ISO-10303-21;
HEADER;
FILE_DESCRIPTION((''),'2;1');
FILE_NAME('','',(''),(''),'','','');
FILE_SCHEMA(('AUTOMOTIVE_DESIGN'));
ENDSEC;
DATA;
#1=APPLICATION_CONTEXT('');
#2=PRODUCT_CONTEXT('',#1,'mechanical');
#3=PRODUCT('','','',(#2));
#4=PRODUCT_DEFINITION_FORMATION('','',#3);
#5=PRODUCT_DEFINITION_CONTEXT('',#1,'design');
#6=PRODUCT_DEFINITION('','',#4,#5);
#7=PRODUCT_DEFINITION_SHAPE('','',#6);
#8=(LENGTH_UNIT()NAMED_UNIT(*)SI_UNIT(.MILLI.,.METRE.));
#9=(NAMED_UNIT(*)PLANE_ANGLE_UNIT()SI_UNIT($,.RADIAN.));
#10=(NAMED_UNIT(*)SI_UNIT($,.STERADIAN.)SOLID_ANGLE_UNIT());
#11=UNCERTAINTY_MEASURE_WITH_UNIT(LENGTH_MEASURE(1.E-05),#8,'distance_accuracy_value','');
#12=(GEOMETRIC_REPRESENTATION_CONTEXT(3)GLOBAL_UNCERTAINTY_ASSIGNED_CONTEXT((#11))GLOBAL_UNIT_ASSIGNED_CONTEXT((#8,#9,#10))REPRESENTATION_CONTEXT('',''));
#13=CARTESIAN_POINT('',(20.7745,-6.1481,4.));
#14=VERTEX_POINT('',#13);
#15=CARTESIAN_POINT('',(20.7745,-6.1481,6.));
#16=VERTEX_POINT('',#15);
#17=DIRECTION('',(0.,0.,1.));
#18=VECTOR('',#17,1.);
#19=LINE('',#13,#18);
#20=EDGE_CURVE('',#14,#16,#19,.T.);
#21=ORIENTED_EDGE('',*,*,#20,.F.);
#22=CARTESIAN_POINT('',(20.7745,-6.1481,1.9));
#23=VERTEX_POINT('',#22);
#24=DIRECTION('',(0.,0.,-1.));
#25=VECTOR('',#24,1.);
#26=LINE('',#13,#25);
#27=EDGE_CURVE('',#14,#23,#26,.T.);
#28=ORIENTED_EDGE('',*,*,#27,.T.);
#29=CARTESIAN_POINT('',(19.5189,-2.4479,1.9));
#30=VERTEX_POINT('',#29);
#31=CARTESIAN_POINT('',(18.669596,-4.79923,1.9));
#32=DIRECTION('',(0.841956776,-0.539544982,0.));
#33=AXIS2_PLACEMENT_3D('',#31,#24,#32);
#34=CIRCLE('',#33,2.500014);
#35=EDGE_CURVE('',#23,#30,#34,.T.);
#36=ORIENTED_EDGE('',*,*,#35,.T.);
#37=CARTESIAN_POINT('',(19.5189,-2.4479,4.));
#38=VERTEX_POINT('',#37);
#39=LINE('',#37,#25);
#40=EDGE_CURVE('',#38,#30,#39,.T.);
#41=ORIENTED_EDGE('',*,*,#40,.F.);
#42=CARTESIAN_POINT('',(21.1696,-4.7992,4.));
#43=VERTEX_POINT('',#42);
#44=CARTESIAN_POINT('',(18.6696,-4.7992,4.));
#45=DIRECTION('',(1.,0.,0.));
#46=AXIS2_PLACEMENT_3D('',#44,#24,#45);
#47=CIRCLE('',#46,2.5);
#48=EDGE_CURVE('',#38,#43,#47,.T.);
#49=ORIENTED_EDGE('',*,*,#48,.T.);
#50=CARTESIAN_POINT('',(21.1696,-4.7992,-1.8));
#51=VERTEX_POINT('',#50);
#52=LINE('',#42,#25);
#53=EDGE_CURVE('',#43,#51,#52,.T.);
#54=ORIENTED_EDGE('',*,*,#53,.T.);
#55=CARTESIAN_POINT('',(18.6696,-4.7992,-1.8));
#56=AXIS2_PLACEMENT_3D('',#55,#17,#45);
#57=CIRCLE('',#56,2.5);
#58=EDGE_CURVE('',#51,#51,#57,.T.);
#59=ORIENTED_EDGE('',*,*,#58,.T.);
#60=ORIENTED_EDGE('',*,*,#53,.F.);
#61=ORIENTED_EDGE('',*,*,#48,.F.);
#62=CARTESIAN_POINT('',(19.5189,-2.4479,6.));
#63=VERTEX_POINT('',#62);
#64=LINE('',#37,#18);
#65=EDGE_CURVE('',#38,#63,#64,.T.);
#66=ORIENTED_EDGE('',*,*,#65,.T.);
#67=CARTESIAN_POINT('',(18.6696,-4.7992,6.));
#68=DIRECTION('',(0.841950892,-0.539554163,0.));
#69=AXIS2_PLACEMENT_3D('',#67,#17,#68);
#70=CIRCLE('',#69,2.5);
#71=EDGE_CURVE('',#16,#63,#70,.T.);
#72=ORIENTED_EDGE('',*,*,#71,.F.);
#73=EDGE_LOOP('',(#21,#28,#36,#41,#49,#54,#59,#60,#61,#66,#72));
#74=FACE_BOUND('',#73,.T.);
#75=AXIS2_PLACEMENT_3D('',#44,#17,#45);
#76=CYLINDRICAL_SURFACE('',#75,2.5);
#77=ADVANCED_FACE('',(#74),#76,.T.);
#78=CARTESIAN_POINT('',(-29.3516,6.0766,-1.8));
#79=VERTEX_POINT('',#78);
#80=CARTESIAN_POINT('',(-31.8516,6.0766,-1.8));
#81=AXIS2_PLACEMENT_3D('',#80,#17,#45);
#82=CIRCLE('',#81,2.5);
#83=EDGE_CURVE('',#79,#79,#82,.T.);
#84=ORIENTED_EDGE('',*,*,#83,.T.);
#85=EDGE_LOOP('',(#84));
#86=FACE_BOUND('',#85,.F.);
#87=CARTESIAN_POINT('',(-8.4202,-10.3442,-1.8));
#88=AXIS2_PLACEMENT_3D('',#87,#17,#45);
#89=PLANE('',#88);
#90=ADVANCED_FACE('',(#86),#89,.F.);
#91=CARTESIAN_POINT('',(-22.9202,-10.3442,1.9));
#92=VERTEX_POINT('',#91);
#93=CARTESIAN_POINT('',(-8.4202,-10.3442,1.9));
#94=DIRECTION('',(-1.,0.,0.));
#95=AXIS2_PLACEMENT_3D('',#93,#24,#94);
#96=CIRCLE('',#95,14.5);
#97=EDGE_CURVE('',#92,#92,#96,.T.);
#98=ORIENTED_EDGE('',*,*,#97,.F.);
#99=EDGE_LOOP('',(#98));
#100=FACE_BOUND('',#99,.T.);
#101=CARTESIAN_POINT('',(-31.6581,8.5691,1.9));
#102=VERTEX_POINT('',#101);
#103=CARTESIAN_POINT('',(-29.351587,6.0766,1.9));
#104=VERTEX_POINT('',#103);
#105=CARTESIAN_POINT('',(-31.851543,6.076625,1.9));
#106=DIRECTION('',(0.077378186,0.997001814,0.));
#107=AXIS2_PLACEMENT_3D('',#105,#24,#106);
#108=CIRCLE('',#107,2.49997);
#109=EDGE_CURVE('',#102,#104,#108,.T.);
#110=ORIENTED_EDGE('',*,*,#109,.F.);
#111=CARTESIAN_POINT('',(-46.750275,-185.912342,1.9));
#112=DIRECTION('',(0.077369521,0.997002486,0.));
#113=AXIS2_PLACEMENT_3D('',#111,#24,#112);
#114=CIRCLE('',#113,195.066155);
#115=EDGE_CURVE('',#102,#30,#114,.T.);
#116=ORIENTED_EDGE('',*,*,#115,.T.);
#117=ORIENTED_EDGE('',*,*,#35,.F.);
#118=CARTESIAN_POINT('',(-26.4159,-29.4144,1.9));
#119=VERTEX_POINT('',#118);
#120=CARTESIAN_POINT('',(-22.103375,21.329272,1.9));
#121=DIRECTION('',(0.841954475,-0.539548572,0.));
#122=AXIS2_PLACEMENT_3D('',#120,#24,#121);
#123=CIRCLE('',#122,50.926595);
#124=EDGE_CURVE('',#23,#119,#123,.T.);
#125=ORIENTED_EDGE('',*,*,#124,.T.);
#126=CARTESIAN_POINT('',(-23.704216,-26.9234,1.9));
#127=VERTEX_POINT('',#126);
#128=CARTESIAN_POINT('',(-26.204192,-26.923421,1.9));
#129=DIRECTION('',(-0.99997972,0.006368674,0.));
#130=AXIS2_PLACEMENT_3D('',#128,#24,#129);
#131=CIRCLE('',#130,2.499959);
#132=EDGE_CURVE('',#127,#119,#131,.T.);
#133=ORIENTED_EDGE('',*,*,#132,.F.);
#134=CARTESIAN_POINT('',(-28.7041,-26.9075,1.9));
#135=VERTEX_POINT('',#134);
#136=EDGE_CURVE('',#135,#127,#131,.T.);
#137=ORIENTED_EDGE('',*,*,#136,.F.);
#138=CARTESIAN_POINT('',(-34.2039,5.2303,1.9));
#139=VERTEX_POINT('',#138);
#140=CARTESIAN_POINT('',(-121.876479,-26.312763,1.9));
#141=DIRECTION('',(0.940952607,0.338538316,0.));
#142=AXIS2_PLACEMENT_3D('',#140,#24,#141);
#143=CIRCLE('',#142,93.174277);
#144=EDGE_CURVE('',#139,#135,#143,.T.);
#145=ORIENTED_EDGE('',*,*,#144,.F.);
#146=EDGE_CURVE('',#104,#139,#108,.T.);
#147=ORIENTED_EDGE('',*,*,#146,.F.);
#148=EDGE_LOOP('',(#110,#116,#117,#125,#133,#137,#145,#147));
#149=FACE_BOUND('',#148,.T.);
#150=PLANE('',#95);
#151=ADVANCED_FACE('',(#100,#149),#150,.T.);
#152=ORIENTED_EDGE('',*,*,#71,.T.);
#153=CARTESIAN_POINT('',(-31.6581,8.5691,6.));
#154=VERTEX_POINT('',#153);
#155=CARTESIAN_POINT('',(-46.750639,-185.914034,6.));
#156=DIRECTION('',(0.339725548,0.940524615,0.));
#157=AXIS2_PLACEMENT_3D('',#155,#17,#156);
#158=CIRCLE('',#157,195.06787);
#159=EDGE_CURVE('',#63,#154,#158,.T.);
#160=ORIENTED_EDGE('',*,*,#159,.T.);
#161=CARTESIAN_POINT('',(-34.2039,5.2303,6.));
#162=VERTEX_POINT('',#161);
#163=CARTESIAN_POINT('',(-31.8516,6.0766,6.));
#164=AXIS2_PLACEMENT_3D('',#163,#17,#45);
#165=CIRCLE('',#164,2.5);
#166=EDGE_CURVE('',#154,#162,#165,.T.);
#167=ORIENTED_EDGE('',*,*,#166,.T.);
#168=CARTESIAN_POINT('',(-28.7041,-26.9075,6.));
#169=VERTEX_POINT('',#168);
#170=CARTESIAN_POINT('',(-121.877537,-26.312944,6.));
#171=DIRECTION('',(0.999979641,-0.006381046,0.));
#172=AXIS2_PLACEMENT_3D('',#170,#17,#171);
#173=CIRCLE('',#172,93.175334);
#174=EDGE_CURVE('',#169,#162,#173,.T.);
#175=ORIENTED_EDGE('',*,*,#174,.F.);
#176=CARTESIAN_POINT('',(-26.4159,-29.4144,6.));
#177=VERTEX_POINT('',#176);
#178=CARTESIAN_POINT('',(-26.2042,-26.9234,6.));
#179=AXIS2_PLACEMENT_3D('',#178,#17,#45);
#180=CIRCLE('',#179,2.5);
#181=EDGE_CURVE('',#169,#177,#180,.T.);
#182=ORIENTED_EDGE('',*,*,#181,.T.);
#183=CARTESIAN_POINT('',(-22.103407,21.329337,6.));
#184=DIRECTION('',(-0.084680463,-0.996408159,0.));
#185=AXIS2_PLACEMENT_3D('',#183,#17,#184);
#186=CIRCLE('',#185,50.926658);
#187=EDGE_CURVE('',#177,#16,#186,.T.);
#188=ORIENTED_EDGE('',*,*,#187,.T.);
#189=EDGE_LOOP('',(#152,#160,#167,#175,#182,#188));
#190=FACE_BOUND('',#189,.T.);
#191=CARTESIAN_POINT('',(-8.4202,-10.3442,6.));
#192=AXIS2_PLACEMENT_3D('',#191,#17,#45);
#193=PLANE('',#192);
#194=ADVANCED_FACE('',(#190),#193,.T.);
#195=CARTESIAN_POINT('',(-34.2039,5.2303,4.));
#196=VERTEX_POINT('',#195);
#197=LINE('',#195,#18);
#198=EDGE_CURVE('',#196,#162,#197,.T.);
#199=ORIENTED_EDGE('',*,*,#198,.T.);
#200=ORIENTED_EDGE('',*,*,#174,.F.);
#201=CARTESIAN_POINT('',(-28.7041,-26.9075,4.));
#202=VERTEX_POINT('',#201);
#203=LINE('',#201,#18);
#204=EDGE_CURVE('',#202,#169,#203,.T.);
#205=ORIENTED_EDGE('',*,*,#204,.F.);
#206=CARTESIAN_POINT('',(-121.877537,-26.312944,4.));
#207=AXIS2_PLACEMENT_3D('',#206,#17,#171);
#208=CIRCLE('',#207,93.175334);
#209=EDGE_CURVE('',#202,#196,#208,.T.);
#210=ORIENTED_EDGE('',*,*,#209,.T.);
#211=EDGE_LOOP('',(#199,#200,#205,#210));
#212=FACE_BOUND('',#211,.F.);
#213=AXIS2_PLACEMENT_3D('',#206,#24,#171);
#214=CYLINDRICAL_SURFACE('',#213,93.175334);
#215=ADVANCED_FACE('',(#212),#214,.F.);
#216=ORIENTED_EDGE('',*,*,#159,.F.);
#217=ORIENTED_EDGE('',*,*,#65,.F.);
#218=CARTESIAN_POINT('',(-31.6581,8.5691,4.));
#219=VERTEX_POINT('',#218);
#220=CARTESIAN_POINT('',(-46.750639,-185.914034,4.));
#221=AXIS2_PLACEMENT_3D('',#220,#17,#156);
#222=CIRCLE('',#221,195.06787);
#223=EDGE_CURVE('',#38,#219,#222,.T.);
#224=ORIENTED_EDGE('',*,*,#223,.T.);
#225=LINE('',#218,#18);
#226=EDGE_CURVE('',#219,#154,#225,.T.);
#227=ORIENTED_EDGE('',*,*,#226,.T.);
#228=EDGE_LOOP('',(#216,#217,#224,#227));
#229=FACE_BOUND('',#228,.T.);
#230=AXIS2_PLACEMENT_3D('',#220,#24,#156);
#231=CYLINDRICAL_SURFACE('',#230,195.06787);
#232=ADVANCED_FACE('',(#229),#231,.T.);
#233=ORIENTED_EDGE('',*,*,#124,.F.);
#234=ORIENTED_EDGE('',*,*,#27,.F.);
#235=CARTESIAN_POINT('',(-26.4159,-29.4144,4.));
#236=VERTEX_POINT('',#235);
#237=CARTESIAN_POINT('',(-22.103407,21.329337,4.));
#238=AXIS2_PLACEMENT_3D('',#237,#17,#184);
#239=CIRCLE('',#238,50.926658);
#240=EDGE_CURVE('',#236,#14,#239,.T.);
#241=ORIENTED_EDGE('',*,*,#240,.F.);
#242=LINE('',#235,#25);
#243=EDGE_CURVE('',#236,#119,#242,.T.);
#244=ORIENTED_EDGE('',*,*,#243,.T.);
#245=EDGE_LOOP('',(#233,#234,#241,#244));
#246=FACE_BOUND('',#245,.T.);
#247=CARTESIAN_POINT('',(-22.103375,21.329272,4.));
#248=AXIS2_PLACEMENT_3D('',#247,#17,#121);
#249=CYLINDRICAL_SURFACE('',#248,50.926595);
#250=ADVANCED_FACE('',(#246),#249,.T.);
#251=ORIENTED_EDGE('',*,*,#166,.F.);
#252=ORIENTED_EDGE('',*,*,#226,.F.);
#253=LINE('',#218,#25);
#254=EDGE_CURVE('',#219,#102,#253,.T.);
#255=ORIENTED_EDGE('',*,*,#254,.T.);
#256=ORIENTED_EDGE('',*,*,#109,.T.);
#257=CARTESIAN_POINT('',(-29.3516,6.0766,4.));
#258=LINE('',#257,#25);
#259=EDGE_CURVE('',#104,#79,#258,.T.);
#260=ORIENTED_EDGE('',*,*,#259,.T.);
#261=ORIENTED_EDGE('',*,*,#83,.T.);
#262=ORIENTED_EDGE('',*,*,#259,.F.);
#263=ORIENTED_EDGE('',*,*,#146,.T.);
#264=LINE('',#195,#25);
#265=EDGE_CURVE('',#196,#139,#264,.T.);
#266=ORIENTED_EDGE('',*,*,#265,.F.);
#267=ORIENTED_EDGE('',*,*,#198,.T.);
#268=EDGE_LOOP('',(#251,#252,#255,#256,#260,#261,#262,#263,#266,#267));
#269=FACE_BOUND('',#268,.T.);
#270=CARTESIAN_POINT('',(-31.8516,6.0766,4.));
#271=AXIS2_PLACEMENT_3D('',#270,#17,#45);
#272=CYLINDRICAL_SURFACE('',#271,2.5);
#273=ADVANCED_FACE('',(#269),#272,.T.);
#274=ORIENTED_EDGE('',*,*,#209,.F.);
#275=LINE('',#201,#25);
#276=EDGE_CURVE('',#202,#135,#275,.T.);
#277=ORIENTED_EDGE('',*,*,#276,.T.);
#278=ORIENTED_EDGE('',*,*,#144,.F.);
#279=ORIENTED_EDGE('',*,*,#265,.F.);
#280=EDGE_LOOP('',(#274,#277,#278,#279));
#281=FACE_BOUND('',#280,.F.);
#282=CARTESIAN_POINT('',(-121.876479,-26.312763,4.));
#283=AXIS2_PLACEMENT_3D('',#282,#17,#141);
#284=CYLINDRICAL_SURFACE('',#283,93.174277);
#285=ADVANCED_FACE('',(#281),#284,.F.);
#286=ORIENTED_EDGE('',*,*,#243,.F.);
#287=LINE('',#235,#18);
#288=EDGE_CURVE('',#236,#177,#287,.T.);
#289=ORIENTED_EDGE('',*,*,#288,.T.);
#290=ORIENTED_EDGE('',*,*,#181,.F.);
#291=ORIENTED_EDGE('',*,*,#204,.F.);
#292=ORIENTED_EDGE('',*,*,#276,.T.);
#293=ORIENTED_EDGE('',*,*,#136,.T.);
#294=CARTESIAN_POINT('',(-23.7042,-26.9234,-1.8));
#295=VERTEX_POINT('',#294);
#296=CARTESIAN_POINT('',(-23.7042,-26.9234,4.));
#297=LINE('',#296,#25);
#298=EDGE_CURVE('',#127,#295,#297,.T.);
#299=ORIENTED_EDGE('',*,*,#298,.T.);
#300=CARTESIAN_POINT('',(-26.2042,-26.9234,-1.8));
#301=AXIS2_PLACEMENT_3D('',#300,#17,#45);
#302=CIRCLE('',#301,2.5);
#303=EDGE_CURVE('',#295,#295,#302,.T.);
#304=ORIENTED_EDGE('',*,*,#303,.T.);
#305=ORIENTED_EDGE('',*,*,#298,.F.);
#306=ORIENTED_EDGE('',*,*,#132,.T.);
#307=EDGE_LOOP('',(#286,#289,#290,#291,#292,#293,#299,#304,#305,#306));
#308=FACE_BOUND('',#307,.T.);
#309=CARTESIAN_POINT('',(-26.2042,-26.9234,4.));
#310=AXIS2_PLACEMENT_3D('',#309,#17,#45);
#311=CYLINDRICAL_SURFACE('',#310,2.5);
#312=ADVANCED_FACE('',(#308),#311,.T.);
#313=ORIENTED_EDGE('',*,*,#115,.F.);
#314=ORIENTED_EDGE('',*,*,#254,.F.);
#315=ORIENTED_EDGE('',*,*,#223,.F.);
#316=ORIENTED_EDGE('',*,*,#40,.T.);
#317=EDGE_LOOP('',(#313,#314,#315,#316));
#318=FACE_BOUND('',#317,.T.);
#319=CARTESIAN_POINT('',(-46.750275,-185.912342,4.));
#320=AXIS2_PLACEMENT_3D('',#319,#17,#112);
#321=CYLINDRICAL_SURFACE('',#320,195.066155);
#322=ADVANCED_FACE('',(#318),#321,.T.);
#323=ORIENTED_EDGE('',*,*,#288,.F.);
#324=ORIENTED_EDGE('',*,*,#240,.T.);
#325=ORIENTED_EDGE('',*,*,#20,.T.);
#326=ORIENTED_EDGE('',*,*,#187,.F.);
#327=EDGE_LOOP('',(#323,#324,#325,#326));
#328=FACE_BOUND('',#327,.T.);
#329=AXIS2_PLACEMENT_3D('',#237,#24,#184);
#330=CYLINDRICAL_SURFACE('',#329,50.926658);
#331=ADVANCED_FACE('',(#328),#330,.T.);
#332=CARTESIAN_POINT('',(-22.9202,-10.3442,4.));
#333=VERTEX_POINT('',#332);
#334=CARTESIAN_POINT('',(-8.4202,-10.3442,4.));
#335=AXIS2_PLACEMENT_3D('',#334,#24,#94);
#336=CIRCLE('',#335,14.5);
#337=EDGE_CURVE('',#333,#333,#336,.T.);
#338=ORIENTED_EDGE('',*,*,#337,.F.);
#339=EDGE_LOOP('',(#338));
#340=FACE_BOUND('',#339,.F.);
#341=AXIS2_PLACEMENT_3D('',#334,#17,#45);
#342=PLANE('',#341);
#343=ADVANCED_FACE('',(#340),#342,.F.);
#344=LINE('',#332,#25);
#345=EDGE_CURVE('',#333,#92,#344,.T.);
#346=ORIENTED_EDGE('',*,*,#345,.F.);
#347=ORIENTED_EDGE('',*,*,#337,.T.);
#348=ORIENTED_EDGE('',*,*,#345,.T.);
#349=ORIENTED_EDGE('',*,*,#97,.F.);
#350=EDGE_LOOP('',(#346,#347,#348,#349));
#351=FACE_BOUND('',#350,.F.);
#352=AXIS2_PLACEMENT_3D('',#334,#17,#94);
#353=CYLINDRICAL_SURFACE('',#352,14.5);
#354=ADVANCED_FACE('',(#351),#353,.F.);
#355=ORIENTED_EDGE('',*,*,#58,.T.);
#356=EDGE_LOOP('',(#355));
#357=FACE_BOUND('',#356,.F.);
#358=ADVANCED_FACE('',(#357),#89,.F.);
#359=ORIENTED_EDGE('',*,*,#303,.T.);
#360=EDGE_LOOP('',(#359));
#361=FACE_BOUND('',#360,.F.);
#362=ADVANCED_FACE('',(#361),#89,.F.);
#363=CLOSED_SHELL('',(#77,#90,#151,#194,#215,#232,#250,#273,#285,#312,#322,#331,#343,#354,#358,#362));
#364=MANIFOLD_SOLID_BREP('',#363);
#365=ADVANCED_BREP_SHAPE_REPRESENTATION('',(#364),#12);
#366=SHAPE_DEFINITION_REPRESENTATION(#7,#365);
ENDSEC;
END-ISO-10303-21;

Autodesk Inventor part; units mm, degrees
ref_plane "РабПлоскость1" through (0, 0, 0) normal (0, 0, 1) x (1, 0, 0)
sketch "Эскиз1" plane through (0, 0, 0) normal (0, 0, 1) x (1, 0, 0)
  line L0 (-1.043, -24.4234) -> (-58.4202, -24.4234) projected
  line L1 (51.5798, -43.5766) -> (-1.043, -24.4234) projected
  line L2 (58.4202, -24.7827) -> (51.5798, -43.5766) projected
  line L3 (32.5787, -15.3772) -> (58.4202, -24.7827) projected
  arc A0 (3.5798, 23.5766) -> (32.5787, -15.3772) centre (44.0796, 23.4555) ccw projected
  line L4 (3.5798, 43.5766) -> (3.5798, 23.5766) projected
  line L5 (-24.4202, 43.5766) -> (3.5798, 43.5766) projected
  line L6 (-24.4202, 12.0766) -> (-24.4202, 43.5766) projected
  arc A1 (-31.4202, 3.5766) -> (-24.4202, 12.0766) centre (-31.8516, 11.0641) ccw projected
  line L7 (-58.4202, 3.5766) -> (-31.4202, 3.5766) projected
  line L8 (-58.4202, -24.4234) -> (-58.4202, 3.5766) projected
  circle A2 centre (-8.4202, -10.3442) radius 12 projected
  circle A3 centre (17.7065, 13.8766) radius 1.65 projected
  circle A4 centre (17.7065, -26.3234) radius 1.65 projected
  circle A5 centre (-32.2935, -26.3234) radius 1.65 projected
  circle A6 centre (-32.2935, 13.8766) radius 1.65 projected
  circle A7 centre (-32.2935, -26.3234) radius 1.65 projected
  circle A8 centre (17.7065, -26.3234) radius 1.65 projected
  circle A9 centre (17.7065, 13.8766) radius 1.65 projected
  circle A10 centre (-32.2935, 13.8766) radius 1.65 projected
  point P0 (0, 0)
ref_plane "РабПлоскость2" through (-8.4202, -10.3442, 4) normal (0, 0, 1) x (1, 0, 0)
sketch "Эскиз2" plane through (-8.4202, -10.3442, 4) normal (0, 0, 1) x (1, 0, 0)
  arc A0 (-17.9957, -19.0702) -> (29.1947, 4.1961) centre (-13.6832, 31.6735) ccw
  circle A1 centre (27.0898, 5.545) radius 2.5
  arc A2 (27.9391, 7.8963) -> (-23.2379, 18.9133) centre (-38.3302, -175.569) ccw
  circle A3 centre (-23.4314, 16.4208) radius 2.5
  arc A4 (-20.2839, -16.5633) -> (-25.7837, 15.5745) centre (-113.4568, -15.9687) ccw
  circle A5 centre (-17.784, -16.5792) radius 2.5
  point P0 (8.4202, 10.3442)
ref_plane "РабПлоскость3" through (-58.4202, -43.5766, -1.8) normal (0, 0, -1) x (0, 1, 0)
extrude "Выдавливание1" add sketch "Эскиз2" against normal up to surface (5.8 mm away) contours A5 | A1 | A3
ref_plane "РабПлоскость4" through (-22.4202, -24.3442, 2) normal (0, 0, -1) x (0, 1, 0)
extrude "Выдавливание2" add sketch "Эскиз2" along normal blind 2
sketch "Эскиз4" plane through (-8.4202, -10.3442, 4) normal (0, 0, -1) x (-1, 0, 0)
  circle A0 centre (0, 0) radius 14 projected
  circle A1 centre (0, 0) radius 14.5
  arc A2 (-29.1947, 4.1961) -> (17.9957, -19.0702) centre (13.6832, 31.6735) ccw projected
  arc A3 (25.7837, 15.5745) -> (20.2839, -16.5633) centre (113.4568, -15.9687) ccw projected
  arc A4 (23.2379, 18.9133) -> (-27.9391, 7.8963) centre (38.3302, -175.569) ccw projected
  arc A5 (20.2839, -16.5633) -> (17.9957, -19.0702) centre (17.784, -16.5792) ccw projected
  arc A6 (25.7837, 15.5745) -> (20.2839, -16.5633) centre (113.4568, -15.9687) ccw projected
  arc A7 (23.2379, 18.9133) -> (25.7837, 15.5745) centre (23.4314, 16.4208) ccw projected
  arc A8 (23.2379, 18.9133) -> (-27.9391, 7.8963) centre (38.3302, -175.569) ccw projected
  arc A9 (-29.1947, 4.1961) -> (-27.9391, 7.8963) centre (-27.0898, 5.545) ccw projected
  arc A10 (-29.1947, 4.1961) -> (17.9957, -19.0702) centre (13.6832, 31.6735) ccw projected
  point P0 (-8.4202, 10.3442)
  point P1 (17.9957, -19.0702)
  point P2 (20.2839, -16.5633)
  point P3 (25.7837, 15.5745)
  point P4 (23.2379, 18.9133)
  point P5 (-27.9391, 7.8963)
  point P6 (-29.1947, 4.1961)
  dimension "d4" = 0.5
extrude "Выдавливание3" add sketch "Эскиз4" along normal blind 2.1 contours A9 A4 A7 A3 A5 A2
sketch "Эскиз5" plane through (-8.4202, -10.3442, 1.9) normal (0, 0, -1) x (-1, 0, 0)
  circle A0 centre (0, 0) radius 14.5 projected
  circle A1 centre (0, 0) radius 12 projected
  circle A2 centre (0, 0) radius 12.5
  point P0 (-8.4202, 10.3442)
  dimension "d7" = 0.5
properties part number "ЛЦМК000002.00.00.00.00.15 Держатель батареи"
